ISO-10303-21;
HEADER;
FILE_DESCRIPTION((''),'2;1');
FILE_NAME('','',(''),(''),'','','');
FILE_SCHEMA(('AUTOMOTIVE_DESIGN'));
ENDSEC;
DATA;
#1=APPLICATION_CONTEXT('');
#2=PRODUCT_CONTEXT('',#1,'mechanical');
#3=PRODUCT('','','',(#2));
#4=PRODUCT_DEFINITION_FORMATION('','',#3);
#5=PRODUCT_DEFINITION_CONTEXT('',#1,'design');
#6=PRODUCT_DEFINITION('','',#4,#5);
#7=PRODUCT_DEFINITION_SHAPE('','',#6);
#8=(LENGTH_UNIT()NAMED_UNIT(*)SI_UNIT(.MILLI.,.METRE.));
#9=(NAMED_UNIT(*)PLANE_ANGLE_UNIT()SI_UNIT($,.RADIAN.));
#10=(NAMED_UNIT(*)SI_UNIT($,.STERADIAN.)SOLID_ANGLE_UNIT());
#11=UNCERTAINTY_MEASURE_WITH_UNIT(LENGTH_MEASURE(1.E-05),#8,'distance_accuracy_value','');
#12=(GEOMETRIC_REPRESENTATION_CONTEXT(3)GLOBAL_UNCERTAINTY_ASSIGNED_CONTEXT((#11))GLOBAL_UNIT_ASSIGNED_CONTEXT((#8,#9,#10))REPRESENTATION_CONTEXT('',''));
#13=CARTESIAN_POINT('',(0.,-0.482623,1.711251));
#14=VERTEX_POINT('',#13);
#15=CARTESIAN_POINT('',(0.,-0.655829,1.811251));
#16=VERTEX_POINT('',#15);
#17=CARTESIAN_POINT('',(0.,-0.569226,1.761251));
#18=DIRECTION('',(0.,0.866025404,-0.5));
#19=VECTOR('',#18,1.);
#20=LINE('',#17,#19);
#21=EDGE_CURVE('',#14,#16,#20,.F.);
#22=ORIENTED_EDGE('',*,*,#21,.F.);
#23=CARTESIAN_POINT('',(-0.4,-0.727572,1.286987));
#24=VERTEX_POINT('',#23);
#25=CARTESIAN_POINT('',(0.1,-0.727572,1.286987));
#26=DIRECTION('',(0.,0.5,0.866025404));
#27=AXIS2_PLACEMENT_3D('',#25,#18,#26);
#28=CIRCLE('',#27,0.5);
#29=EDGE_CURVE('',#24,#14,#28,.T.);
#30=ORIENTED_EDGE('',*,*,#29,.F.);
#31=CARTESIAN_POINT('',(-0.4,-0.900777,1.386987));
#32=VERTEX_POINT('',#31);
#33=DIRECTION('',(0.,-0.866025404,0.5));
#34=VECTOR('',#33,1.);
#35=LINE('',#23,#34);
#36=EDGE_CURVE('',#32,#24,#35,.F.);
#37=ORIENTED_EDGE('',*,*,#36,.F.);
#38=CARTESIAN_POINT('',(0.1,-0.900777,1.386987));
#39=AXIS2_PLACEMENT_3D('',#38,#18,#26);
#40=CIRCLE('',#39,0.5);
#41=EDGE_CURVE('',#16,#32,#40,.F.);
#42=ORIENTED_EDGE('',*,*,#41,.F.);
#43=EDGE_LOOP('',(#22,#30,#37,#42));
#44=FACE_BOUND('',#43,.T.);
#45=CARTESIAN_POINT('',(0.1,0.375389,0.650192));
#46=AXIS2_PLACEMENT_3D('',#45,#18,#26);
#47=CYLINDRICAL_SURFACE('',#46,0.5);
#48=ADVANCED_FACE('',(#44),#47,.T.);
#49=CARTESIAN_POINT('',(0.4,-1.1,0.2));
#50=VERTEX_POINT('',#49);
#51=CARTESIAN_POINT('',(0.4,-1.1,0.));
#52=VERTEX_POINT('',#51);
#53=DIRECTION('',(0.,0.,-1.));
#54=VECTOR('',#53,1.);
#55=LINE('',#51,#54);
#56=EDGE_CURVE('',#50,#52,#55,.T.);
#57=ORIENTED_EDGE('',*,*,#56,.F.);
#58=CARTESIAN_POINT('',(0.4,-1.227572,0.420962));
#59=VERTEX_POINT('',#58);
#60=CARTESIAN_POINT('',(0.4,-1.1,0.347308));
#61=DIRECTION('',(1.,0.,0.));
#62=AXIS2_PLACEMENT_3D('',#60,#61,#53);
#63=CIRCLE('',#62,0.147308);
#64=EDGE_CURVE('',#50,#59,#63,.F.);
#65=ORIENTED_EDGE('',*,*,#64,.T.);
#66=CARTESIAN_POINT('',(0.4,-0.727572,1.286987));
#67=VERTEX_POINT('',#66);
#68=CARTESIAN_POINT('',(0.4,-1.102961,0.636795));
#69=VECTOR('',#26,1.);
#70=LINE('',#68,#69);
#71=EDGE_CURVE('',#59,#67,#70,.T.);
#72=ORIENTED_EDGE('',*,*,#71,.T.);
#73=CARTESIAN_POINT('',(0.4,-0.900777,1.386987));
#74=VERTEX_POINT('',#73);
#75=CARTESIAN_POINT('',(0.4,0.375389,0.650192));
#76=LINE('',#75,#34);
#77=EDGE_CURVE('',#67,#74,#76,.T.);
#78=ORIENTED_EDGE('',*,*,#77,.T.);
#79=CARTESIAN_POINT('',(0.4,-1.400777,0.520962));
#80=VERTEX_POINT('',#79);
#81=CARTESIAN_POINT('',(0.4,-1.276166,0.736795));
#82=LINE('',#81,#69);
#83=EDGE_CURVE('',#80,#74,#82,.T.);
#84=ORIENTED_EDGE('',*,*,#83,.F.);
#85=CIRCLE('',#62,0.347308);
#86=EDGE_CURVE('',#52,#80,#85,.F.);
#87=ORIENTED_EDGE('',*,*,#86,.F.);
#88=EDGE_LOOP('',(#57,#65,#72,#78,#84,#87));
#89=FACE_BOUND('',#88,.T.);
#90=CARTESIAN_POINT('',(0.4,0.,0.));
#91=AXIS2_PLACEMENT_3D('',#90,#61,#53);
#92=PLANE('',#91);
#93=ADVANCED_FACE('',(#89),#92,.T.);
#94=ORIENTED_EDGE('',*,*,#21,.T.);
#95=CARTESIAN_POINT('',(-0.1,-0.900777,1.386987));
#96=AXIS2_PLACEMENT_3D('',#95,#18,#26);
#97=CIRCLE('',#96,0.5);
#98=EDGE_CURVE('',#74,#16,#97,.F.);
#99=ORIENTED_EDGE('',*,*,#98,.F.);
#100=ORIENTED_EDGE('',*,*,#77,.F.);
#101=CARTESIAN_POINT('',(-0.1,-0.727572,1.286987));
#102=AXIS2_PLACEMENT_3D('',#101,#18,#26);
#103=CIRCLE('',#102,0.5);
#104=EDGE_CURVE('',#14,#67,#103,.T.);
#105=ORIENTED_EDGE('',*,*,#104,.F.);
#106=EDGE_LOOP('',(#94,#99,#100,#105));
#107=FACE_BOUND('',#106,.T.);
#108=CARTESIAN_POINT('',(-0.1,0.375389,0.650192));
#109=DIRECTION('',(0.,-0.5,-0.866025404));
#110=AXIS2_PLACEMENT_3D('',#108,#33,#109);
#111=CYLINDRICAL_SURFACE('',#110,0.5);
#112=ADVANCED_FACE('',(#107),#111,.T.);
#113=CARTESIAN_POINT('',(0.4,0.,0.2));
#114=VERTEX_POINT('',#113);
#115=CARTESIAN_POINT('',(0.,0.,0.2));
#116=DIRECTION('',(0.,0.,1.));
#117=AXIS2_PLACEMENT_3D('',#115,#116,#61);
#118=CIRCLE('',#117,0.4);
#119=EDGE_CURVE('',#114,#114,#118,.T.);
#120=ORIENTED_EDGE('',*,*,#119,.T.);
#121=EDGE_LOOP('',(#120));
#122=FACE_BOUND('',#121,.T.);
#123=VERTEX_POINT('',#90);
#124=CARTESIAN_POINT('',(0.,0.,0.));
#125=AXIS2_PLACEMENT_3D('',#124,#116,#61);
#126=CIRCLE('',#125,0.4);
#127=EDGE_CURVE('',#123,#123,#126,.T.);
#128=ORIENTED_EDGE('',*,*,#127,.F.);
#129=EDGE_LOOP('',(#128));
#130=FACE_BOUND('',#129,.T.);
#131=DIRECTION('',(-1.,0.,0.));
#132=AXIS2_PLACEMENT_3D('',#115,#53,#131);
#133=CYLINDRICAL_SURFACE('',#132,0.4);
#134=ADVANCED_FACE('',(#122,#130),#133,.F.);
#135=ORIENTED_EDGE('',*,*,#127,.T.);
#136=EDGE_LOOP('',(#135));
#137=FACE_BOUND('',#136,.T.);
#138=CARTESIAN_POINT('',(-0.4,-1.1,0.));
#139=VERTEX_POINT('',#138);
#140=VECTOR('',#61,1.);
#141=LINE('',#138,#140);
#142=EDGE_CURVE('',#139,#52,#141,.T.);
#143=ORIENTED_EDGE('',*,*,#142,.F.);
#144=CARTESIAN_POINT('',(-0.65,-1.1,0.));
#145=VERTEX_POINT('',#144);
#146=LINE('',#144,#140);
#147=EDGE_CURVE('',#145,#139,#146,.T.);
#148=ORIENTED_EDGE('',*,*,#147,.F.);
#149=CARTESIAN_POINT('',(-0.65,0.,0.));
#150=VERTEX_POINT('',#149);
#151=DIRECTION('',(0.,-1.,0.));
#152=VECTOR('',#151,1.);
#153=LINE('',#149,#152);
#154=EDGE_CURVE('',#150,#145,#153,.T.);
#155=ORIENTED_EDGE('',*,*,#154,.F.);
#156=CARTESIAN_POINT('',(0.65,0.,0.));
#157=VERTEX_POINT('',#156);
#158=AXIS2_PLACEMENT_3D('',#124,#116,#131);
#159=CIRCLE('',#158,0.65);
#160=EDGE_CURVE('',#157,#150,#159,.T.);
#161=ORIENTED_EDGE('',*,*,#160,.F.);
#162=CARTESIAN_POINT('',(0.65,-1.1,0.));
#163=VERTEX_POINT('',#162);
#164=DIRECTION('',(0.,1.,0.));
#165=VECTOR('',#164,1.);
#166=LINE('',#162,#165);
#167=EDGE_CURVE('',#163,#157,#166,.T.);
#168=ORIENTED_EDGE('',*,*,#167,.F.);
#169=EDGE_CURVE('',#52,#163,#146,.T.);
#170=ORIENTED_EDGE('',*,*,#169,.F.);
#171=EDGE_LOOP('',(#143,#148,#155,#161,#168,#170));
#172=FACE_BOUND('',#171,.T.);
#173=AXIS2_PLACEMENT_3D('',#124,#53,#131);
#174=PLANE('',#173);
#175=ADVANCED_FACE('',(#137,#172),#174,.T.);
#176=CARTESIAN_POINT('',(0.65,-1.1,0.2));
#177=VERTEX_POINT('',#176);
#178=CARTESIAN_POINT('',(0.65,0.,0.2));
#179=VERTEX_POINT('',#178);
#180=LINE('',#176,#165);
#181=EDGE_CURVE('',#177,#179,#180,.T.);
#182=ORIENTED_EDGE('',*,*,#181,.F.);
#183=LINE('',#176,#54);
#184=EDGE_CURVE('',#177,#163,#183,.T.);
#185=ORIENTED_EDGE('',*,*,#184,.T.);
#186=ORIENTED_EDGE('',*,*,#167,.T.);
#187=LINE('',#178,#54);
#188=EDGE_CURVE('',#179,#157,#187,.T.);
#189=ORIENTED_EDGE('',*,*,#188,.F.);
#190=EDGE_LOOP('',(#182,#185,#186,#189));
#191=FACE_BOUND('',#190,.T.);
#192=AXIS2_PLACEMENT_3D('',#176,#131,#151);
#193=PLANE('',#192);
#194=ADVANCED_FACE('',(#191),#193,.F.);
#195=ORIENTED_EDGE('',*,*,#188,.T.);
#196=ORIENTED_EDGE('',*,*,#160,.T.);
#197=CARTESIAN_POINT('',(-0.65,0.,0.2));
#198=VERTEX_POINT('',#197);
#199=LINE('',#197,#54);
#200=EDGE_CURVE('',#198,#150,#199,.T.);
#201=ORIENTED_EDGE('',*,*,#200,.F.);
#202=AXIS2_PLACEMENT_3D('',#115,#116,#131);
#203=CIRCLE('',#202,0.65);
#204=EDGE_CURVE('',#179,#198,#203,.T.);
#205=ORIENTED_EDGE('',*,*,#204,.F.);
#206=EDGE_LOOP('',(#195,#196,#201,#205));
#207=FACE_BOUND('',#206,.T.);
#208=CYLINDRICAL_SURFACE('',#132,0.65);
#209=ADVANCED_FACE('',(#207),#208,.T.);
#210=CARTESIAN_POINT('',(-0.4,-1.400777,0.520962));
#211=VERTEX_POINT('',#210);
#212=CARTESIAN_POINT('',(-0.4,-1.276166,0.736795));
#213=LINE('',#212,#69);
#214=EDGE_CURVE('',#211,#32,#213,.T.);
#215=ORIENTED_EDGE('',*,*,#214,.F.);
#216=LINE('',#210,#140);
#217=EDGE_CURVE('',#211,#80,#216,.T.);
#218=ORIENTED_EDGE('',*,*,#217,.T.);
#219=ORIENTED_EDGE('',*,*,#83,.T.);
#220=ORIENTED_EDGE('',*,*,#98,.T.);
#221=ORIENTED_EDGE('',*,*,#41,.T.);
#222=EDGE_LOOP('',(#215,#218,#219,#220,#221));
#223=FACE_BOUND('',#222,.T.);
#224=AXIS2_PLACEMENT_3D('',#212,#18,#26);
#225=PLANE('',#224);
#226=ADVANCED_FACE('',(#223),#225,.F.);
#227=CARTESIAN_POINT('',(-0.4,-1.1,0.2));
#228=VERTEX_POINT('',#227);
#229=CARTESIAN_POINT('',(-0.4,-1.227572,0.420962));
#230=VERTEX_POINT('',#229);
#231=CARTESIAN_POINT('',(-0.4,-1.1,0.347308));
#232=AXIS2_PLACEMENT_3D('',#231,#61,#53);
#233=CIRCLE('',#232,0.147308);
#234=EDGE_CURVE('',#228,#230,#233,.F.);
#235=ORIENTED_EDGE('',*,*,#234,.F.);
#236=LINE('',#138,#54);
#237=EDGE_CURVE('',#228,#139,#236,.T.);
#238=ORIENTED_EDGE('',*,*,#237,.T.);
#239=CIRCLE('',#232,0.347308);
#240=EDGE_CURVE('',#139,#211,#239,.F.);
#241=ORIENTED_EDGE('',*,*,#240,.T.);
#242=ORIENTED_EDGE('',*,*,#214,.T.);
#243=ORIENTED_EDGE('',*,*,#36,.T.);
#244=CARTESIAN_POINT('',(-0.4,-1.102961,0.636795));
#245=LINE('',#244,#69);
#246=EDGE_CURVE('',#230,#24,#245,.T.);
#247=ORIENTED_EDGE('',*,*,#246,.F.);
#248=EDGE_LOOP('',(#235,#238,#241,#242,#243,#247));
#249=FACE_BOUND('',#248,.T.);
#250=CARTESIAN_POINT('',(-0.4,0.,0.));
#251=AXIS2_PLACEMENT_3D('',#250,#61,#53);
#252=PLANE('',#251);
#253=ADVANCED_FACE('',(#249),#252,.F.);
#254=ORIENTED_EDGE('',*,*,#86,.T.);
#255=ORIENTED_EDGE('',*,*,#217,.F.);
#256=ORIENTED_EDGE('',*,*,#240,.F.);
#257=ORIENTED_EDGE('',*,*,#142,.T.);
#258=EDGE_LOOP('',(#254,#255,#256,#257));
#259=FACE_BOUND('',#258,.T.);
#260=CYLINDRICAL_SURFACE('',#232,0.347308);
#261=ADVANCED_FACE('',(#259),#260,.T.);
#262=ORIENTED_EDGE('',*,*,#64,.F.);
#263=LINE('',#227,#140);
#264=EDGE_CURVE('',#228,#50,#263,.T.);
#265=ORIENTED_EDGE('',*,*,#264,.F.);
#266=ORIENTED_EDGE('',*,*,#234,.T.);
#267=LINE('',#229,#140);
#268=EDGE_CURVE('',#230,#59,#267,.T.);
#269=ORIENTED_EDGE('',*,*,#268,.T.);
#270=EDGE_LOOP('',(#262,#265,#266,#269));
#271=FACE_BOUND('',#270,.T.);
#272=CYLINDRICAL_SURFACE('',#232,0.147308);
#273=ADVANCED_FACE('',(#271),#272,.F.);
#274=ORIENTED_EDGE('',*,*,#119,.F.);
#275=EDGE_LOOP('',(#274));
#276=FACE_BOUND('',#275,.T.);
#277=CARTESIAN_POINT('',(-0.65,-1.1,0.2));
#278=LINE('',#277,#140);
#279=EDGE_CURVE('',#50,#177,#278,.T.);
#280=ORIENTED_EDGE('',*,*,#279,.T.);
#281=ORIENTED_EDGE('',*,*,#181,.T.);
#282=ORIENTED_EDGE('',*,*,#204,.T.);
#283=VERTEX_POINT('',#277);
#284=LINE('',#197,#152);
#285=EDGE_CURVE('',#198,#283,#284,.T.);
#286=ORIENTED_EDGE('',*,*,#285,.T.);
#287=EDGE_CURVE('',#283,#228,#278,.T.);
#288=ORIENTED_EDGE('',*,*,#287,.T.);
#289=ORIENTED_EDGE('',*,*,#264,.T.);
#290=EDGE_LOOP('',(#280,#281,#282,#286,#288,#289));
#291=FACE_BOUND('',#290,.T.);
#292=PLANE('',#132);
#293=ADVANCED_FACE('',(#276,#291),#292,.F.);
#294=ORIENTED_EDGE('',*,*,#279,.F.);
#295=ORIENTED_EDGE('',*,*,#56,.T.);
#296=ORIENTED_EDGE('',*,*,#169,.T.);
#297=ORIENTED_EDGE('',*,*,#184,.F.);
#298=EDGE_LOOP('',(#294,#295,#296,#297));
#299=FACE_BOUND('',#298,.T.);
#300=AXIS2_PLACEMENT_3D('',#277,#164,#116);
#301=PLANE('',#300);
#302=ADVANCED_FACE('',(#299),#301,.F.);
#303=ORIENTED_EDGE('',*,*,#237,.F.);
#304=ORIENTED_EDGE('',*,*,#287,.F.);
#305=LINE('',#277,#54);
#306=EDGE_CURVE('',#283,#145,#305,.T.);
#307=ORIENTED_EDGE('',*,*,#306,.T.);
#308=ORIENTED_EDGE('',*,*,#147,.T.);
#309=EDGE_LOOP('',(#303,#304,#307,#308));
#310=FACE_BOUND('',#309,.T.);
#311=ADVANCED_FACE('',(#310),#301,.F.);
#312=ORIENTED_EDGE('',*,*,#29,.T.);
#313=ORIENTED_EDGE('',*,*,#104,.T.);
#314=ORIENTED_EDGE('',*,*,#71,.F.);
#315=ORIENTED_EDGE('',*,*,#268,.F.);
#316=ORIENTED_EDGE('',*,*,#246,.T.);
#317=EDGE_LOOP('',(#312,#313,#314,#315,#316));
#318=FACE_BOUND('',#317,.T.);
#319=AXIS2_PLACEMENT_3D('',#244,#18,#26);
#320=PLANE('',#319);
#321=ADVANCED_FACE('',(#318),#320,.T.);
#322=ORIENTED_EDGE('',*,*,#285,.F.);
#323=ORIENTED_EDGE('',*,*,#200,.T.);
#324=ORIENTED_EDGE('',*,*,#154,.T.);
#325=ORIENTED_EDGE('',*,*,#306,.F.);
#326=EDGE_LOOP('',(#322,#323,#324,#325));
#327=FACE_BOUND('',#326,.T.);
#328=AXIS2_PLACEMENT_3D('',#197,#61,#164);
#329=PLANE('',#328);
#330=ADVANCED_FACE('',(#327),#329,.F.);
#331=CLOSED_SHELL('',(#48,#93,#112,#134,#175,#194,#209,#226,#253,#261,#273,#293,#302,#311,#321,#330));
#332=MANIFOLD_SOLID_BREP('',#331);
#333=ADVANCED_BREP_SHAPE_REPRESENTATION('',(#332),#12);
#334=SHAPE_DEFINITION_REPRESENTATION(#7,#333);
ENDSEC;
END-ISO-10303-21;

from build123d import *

# Parameters (mm, degrees)
SKETCH1_R           = 0.4
BOSS_EXTRUDE1_DEPTH = 0.2
BOSS_EXTRUDE2_DEPTH = 0.4
FILLET2_R           = 0.5


with BuildPart() as part:
    # Sketch1 → Boss-Extrude1 (new body)
    with BuildSketch(Plane.XY):
        with BuildLine():
            Line((-0.65, 0), (-0.65, -1.1))
            Line((-0.65, -1.1), (0.65, -1.1))
            Line((0.65, -1.1), (0.65, 0))
            ThreePointArc((0.65, 0), (0, 0.65), (-0.65, 0))
        make_face()
        Circle(SKETCH1_R, mode=Mode.SUBTRACT)
    extrude(amount=BOSS_EXTRUDE1_DEPTH)

    # Sketch2 → Boss-Extrude2 (add, symmetric)
    with BuildSketch(Plane(origin=(0, 0, 0), x_dir=(0, 0, -1), z_dir=(1, 0, 0))):
        with BuildLine():
            Line((-0.2, -1.1), (0, -1.1))
            ThreePointArc((0, -1.1), (-0.173653965, -1.40077749), (-0.520961894, -1.40077749))
            Line((-0.520961894, -1.40077749), (-1.82, -0.65077749))
            Line((-1.82, -0.65077749), (-1.72, -0.477572409))
            Line((-1.72, -0.477572409), (-0.420961894, -1.227572409))
            ThreePointArc((-0.420961894, -1.227572409), (-0.273653965, -1.227572409), (-0.2, -1.1))
        make_face()
    extrude(amount=BOSS_EXTRUDE2_DEPTH, both=True)

    # Fillet2
    # the kernel refuses this fillet: 0.5 mm, written as the material it takes off along each edge
    with BuildSketch(Plane(origin=(0.4, -1.733309245, 2.445), x_dir=(-1, 0, 0), z_dir=(0, 0.86602540378444, -0.49999999999999756)), Plane(origin=(-0.4, -1.733309245, 2.445), x_dir=(0, -0.49999999999999756, -0.86602540378444), z_dir=(0, 0.86602540378444, -0.49999999999999756))) as fillet2_piece_1:
        with BuildLine():
            CenterArc((FILLET2_R, -FILLET2_R), FILLET2_R, 90, 90)
            Line((0, -FILLET2_R), (0, 0))
            Line((0, 0), (FILLET2_R, 0))
        make_face()
    extrude(amount=2.7, mode=Mode.SUBTRACT)


solid = part.part
